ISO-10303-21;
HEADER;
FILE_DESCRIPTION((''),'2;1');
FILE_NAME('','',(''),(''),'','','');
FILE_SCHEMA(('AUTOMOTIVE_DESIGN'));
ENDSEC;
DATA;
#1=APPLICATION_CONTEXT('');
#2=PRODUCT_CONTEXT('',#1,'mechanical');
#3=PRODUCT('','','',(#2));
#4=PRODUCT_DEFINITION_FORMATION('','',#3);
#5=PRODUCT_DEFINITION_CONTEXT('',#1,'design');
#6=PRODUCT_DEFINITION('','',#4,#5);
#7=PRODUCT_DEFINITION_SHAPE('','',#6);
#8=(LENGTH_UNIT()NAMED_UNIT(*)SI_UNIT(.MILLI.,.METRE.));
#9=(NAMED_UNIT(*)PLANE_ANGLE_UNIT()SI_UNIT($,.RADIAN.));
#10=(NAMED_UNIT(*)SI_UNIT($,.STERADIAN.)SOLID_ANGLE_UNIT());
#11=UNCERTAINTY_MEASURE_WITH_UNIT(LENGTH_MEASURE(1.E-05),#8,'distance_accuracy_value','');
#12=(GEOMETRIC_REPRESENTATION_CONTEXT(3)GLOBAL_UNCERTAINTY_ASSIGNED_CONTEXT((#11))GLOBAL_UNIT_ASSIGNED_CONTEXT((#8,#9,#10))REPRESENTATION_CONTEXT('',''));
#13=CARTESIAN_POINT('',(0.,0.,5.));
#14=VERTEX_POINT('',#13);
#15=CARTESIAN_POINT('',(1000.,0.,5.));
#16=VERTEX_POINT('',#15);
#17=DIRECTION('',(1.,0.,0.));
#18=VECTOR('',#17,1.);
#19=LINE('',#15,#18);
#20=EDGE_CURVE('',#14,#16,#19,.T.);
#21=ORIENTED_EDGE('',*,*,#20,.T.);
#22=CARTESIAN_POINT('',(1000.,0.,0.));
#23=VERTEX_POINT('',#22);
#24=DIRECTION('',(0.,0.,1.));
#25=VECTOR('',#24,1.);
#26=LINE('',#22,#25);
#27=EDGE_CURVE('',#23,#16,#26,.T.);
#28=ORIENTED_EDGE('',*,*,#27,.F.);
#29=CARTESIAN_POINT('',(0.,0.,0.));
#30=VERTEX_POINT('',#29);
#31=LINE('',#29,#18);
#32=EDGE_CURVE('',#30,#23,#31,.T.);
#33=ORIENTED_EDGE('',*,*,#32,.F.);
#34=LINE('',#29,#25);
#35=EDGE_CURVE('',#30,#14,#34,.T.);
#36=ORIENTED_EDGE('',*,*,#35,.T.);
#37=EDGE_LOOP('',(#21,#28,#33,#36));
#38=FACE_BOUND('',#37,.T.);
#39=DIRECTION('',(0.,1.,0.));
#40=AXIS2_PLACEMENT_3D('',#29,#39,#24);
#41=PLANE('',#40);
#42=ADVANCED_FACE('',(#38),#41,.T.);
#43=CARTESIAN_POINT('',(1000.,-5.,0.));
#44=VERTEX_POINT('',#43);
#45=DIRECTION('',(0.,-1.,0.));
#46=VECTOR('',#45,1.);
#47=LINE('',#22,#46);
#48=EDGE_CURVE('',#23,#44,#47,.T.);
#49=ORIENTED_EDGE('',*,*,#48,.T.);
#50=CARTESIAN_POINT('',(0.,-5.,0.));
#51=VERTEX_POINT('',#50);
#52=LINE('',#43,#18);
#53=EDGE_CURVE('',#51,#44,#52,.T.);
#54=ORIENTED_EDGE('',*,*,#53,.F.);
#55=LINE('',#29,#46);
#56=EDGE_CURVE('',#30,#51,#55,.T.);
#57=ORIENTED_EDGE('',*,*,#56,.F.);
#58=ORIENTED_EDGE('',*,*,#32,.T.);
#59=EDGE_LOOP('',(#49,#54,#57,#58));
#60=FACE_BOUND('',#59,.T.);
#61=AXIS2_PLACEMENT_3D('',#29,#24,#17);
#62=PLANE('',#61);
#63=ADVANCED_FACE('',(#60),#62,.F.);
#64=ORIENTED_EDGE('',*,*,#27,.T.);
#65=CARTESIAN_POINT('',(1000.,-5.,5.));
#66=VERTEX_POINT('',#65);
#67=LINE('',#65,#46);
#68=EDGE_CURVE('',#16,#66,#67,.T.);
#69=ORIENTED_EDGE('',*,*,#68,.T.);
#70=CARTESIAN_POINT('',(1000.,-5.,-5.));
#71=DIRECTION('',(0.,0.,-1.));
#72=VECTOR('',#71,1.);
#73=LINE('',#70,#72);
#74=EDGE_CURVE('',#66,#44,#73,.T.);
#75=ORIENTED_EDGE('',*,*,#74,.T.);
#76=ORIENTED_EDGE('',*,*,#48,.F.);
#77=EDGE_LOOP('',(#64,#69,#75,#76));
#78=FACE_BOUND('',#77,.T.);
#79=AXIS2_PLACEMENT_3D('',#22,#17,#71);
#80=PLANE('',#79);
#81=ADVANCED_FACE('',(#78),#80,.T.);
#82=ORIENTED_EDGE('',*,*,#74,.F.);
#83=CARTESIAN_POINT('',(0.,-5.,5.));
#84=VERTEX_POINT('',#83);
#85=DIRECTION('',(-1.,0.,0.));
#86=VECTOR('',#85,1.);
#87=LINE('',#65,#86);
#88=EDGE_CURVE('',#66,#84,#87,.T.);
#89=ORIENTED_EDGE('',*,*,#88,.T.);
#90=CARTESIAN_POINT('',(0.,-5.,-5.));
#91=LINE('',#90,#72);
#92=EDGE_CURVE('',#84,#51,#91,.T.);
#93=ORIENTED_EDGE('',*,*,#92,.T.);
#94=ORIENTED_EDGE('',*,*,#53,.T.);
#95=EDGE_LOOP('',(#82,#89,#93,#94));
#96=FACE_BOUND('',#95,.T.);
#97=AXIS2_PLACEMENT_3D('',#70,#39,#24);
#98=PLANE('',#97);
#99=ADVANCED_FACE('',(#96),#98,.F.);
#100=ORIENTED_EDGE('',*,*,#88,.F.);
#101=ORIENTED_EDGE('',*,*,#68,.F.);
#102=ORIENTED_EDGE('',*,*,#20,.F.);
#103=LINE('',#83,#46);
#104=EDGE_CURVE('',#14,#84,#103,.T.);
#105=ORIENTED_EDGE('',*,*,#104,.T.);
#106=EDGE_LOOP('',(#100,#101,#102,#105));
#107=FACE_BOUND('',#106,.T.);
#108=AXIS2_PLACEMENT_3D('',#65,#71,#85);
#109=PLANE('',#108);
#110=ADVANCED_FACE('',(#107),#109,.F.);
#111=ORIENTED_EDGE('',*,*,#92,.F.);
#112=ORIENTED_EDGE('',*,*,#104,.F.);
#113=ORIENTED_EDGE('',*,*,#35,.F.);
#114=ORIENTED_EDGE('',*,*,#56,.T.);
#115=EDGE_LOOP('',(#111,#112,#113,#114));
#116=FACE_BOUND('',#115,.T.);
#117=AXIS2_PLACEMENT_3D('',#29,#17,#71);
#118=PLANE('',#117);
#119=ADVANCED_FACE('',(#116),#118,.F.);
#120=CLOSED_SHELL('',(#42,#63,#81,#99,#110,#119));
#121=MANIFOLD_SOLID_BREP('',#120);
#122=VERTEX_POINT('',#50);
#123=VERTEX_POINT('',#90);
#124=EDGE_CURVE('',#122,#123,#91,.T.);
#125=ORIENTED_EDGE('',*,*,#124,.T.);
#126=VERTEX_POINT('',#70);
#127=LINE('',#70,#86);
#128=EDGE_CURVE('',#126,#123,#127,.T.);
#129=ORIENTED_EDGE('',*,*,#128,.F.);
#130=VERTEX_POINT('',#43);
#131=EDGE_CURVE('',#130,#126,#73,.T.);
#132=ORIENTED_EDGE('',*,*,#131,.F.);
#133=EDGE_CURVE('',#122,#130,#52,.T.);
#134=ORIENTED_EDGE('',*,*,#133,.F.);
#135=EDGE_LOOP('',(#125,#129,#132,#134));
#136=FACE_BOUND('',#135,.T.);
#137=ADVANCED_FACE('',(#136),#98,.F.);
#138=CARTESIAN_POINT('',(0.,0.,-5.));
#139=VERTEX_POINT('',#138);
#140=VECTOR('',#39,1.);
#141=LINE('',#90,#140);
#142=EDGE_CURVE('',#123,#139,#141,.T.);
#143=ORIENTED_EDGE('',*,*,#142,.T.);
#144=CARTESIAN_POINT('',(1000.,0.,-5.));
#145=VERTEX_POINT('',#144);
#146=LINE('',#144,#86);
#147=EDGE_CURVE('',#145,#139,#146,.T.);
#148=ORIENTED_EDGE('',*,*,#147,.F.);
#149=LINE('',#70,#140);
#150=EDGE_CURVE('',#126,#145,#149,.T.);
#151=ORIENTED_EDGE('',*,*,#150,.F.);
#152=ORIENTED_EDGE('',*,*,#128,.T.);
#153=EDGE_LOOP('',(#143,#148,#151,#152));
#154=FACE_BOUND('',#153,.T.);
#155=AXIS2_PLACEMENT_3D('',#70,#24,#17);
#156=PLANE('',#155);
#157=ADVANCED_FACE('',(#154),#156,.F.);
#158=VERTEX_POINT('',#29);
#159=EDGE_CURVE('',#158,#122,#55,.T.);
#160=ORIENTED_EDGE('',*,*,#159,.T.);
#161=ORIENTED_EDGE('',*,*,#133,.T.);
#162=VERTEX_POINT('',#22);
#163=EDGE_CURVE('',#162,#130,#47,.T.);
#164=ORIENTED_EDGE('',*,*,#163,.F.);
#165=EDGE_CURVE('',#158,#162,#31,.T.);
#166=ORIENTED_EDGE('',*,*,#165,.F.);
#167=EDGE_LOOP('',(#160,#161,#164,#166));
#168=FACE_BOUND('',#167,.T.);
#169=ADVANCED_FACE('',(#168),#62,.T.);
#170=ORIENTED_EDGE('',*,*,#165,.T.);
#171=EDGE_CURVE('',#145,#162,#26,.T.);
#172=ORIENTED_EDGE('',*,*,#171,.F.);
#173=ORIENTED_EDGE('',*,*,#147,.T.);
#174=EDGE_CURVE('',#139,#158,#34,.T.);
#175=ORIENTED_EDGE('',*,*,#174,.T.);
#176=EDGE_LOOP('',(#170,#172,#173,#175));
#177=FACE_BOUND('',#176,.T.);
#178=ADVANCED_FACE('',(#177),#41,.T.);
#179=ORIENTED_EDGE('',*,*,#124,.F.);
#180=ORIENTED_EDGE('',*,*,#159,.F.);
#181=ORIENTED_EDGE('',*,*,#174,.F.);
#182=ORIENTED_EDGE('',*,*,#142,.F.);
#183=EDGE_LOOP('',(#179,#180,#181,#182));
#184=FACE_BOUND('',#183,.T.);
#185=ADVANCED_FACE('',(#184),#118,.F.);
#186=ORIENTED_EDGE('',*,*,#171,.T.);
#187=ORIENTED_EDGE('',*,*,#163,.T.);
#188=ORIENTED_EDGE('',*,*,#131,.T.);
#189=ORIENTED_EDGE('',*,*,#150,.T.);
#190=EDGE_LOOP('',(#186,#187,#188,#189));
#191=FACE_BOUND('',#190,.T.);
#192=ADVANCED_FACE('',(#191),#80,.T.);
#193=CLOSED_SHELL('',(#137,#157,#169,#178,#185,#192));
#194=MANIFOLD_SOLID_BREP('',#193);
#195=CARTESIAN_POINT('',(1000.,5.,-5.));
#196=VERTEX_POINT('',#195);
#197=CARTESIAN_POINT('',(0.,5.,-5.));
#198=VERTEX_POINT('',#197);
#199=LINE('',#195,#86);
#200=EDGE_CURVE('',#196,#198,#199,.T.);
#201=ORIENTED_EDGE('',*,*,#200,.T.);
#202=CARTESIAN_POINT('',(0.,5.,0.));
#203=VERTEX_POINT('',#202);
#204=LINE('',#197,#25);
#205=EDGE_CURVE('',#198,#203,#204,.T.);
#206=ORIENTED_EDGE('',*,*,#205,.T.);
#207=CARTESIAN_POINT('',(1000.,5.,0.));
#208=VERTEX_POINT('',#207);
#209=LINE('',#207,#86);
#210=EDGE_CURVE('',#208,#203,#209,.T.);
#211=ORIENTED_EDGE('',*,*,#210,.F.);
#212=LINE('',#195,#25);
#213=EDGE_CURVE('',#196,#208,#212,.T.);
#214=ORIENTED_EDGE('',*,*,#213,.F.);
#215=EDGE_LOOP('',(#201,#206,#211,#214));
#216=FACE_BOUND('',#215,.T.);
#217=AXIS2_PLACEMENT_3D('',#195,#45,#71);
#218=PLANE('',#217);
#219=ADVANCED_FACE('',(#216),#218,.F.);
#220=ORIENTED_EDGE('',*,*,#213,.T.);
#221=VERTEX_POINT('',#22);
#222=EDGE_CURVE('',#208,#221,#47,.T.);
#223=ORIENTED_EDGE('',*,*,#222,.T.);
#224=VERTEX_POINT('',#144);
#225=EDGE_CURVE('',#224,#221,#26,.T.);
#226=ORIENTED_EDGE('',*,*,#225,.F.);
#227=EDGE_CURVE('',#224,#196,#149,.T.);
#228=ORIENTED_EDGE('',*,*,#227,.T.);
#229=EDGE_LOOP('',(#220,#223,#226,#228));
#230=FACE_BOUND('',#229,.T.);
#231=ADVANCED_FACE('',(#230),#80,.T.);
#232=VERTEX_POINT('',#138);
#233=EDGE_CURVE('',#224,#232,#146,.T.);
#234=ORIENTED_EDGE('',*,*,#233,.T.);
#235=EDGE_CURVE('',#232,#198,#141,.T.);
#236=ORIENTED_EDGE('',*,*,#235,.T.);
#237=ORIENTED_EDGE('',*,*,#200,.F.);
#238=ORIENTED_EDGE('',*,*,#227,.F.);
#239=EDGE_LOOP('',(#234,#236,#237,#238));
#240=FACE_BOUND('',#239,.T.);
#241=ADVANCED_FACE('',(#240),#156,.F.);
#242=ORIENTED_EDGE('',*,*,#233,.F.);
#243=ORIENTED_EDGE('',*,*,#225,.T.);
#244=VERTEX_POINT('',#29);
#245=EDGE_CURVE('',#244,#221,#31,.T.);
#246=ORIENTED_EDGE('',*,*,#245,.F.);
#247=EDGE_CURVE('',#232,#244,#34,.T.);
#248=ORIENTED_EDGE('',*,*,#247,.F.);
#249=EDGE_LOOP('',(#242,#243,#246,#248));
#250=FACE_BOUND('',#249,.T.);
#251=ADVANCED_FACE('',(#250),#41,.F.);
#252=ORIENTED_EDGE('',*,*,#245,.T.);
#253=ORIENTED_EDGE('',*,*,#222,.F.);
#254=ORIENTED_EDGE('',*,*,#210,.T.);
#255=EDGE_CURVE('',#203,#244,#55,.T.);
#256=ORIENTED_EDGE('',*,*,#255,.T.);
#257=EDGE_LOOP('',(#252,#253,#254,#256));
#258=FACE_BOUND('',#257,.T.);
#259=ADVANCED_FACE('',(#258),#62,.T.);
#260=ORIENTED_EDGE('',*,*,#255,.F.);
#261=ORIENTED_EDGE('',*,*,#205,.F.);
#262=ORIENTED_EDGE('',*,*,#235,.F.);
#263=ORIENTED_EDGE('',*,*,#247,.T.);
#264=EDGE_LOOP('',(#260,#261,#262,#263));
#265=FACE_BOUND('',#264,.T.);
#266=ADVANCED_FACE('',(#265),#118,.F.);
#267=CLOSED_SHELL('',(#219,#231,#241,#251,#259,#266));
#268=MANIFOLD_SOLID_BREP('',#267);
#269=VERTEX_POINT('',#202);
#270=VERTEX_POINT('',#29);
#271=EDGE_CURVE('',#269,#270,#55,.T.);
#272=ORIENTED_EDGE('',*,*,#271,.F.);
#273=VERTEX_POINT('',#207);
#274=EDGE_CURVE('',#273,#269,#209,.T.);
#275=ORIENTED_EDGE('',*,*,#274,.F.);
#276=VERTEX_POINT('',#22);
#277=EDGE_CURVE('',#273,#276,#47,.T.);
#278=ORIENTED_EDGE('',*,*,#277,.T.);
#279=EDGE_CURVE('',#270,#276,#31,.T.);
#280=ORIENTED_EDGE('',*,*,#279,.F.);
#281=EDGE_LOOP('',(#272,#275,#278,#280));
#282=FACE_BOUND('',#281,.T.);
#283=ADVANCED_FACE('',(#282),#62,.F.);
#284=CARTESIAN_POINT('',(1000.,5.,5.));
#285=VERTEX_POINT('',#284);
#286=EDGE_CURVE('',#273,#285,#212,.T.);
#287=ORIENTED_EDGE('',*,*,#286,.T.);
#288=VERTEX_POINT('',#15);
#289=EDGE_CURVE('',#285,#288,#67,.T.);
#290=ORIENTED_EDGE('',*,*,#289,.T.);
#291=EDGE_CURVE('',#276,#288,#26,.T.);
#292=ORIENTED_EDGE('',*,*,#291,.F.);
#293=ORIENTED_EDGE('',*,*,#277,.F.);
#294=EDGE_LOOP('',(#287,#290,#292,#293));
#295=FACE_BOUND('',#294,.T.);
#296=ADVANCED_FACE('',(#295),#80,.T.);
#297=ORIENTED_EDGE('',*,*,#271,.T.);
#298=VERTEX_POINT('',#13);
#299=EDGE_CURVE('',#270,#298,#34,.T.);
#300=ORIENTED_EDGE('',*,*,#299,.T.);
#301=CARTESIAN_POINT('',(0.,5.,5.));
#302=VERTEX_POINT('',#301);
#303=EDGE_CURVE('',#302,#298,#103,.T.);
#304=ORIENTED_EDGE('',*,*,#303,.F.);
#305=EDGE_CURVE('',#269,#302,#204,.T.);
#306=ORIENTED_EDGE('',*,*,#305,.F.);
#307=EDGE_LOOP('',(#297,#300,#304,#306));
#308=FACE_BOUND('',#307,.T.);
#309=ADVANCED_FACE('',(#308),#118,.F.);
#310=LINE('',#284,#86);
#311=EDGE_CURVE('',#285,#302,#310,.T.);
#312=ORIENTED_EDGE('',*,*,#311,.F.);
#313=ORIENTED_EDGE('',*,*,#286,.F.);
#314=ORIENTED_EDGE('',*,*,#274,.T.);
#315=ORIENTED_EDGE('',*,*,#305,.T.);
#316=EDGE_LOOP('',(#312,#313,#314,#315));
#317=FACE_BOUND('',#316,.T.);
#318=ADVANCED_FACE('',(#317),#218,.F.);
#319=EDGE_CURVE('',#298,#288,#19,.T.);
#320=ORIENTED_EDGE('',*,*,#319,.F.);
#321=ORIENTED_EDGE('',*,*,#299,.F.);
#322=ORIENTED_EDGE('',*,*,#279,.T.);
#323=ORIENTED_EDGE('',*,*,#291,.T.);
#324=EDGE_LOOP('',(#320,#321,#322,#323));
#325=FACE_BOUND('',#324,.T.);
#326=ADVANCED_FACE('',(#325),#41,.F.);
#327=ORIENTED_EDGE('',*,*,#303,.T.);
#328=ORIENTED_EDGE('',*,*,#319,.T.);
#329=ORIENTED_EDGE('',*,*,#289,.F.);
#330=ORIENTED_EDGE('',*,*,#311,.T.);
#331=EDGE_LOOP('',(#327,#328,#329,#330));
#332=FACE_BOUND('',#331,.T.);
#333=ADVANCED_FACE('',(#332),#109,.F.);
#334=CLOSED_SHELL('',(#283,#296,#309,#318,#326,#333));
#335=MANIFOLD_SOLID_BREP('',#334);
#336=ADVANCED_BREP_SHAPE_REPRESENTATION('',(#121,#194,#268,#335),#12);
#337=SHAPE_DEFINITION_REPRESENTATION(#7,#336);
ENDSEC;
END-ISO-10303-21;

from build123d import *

# Parameters (mm, degrees)
SKETCH_1_W                 = 10
SKETCH_1_H                 = 10
EXTRUDE_1_DEPTH            = 1000
SPLIT_START                = -5
SPLIT_BODIES_1_OUTLINE_W   = 1000
SPLIT_BODIES_1_OUTLINE_H   = 5
SPLIT_BODIES_1_DEPTH       = 10
SPLIT_BODIES_1_2_OUTLINE_W = 1000
SPLIT_BODIES_1_2_OUTLINE_H = 5
SPLIT_BODIES_1_2_DEPTH     = 5
SPLIT_BODIES_1_3_OUTLINE_W = 1000
SPLIT_BODIES_1_3_OUTLINE_H = 5
SPLIT_BODIES_1_3_DEPTH     = 5
SPLIT_BODIES_1_4_OUTLINE_W = 1000
SPLIT_BODIES_1_4_OUTLINE_H = 5
SPLIT_BODIES_1_4_DEPTH     = 5
SPLIT_BODIES_1_5_OUTLINE_W = 1000
SPLIT_BODIES_1_5_OUTLINE_H = 5
SPLIT_BODIES_1_5_DEPTH     = 5


# Read off the part's stored shape, not the designer's step: Разделить1
with BuildPart() as part:
    # Эскиз1 → Бобышка-Вытянуть1 (new body)
    with BuildSketch(Plane(origin=(0, 0, 0), x_dir=(0, 0, -1), z_dir=(1, 0, 0))):
        Rectangle(SKETCH_1_W, SKETCH_1_H)
    extrude(amount=EXTRUDE_1_DEPTH)

    # Split Bodies 1 outline → Split Bodies 1 (cut)
    with BuildSketch(Plane(origin=(0, 0, 0), x_dir=(1, 0, 0), z_dir=(0, 1, 0)).offset(SPLIT_START)):
        with Locations((500, -2.5)):
            Rectangle(SPLIT_BODIES_1_OUTLINE_W, SPLIT_BODIES_1_OUTLINE_H)
    extrude(amount=SPLIT_BODIES_1_DEPTH, mode=Mode.SUBTRACT)

    # Split Bodies 1 2 outline → Split Bodies 1 2 (cut)
    with BuildSketch(Plane(origin=(0, 0, 0), x_dir=(1, 0, 0), z_dir=(0, 1, 0))):
        with Locations((500, 2.5)):
            Rectangle(SPLIT_BODIES_1_2_OUTLINE_W, SPLIT_BODIES_1_2_OUTLINE_H)
    extrude(amount=SPLIT_BODIES_1_2_DEPTH, mode=Mode.SUBTRACT)


with BuildPart() as body_2:
    # Split Bodies 1 3 outline → Split Bodies 1 3 (new body)
    with BuildSketch(Plane(origin=(0, 0, 0), x_dir=(1, 0, 0), z_dir=(0, 1, 0))):
        with Locations((500, -2.5)):
            Rectangle(SPLIT_BODIES_1_3_OUTLINE_W, SPLIT_BODIES_1_3_OUTLINE_H)
    extrude(amount=SPLIT_BODIES_1_3_DEPTH)


with BuildPart() as body_3:
    # Split Bodies 1 4 outline → Split Bodies 1 4 (new body)
    with BuildSketch(Plane.XY):
        with Locations((500, -2.5)):
            Rectangle(SPLIT_BODIES_1_4_OUTLINE_W, SPLIT_BODIES_1_4_OUTLINE_H)
    extrude(amount=SPLIT_BODIES_1_4_DEPTH)


with BuildPart() as body_4:
    # Split Bodies 1 5 outline → Split Bodies 1 5 (new body)
    with BuildSketch(Plane(origin=(0, 0, 0), x_dir=(1, 0, 0), z_dir=(0, 1, 0))):
        with Locations((500, 2.5)):
            Rectangle(SPLIT_BODIES_1_5_OUTLINE_W, SPLIT_BODIES_1_5_OUTLINE_H)
    extrude(amount=SPLIT_BODIES_1_5_DEPTH)


solid = Compound([part.part, body_2.part, body_3.part, body_4.part])
